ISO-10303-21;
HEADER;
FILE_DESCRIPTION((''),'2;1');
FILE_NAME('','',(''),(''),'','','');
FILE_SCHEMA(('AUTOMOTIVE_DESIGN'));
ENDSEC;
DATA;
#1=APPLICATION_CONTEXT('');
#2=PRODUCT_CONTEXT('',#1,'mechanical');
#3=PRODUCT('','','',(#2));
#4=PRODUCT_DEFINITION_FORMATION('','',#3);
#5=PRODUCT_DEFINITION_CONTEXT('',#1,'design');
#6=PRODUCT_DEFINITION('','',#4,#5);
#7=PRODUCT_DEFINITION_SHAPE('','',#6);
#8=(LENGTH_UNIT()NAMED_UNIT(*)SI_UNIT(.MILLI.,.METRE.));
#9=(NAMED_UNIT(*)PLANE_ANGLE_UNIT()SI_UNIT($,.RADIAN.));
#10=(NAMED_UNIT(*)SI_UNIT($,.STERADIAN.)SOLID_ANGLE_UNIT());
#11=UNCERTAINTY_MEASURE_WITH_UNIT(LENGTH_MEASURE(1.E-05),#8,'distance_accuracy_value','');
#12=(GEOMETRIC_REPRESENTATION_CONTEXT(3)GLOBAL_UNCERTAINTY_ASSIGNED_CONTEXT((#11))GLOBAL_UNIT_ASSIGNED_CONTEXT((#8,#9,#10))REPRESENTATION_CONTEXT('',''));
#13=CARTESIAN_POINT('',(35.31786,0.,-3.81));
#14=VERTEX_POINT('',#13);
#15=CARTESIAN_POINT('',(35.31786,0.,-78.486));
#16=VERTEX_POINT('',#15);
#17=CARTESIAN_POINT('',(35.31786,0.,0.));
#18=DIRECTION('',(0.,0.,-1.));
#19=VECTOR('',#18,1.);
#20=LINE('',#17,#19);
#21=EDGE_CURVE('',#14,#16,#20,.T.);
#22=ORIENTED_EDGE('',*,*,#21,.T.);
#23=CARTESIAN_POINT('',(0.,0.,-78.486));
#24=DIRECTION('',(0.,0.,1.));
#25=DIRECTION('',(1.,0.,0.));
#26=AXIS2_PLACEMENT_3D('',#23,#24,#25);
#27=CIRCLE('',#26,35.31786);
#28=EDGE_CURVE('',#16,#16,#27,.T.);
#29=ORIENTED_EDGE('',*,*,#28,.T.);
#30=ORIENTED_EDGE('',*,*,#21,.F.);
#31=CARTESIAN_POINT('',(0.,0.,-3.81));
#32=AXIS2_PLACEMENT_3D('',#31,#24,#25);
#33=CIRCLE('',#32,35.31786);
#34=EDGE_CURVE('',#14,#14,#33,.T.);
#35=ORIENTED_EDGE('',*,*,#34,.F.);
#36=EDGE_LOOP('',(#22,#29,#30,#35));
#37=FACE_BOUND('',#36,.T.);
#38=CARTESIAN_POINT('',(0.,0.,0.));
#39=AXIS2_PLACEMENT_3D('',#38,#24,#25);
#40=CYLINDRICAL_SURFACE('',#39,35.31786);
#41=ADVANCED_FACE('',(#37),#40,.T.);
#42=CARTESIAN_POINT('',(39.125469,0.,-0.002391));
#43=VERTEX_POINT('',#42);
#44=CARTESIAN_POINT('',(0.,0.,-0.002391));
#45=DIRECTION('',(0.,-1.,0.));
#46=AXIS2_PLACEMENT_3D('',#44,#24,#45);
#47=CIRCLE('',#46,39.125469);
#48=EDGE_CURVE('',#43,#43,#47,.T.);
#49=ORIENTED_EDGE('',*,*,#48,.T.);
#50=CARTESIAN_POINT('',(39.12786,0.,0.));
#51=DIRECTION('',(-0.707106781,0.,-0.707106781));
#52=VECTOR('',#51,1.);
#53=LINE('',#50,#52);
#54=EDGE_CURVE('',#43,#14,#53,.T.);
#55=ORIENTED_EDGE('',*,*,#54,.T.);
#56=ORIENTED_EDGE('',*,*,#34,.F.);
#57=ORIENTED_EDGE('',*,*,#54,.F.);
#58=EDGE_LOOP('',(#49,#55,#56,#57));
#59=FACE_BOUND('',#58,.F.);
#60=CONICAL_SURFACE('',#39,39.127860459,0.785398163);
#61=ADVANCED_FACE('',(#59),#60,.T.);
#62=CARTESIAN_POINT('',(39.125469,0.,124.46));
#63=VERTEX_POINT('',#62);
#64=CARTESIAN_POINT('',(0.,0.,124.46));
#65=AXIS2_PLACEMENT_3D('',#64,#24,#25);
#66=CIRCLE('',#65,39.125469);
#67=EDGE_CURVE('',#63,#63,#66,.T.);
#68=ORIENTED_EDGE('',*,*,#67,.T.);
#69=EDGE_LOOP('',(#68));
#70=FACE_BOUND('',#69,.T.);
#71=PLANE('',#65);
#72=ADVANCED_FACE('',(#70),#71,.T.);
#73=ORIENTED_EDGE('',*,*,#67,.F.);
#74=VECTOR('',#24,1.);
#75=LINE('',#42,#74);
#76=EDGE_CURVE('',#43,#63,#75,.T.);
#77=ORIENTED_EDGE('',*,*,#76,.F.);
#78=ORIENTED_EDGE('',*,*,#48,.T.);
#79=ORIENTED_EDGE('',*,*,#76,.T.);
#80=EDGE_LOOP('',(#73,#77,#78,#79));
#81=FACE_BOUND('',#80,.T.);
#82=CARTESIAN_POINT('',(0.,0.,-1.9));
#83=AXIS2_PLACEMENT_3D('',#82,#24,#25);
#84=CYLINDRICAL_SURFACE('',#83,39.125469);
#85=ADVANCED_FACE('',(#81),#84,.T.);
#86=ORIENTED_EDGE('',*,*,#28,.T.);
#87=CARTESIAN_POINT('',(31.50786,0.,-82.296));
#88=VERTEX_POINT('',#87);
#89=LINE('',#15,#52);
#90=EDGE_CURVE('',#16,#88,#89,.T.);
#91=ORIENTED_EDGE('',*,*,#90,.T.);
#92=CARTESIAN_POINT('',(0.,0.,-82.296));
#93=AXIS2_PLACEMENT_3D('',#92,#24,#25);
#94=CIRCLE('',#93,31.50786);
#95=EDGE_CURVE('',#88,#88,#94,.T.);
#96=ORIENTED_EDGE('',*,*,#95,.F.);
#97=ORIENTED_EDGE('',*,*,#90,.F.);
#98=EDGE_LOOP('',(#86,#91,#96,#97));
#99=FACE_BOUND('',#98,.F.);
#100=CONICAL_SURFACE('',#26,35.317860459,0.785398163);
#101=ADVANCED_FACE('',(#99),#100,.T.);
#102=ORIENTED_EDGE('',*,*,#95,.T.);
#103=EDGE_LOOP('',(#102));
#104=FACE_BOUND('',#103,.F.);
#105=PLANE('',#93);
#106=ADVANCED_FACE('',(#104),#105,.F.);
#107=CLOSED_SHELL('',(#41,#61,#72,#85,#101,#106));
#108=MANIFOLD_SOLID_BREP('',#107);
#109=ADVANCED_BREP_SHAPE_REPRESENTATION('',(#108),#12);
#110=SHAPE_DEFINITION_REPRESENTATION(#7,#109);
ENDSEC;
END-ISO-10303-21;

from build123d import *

# Parameters (mm, degrees)
F0_R        = 39.1254691666
F1_DEPTH    = 124.46
F2_R        = 35.3178604587
F3_DEPTH    = 82.296
F4_S5_R     = 39.1254691666
F4_T6_DEPTH = 57


# Not quite as in the source:
# - a fillet or chamfer that OpenCascade refuses, or shapes differently, is made with other operations: its cross-section is extruded or revolved along the edge and cut away or added
# - a feature of the source that left no trace in its solid (it failed there, or was rolled back) is left out


with BuildPart() as f1:
    # F0 (on Top) → F1 (new body)
    with BuildSketch(Plane.XY):
        Circle(F0_R)
    extrude(amount=F1_DEPTH)

    # F2 (on Top) → F3 (join)
    with BuildSketch(Plane.XY):
        Circle(F2_R)
    extrude(amount=-F3_DEPTH)

    # F4: chamfer of 3.81 on 3 edges, made by hand


with BuildPart() as f4_tool2:
    # F4_s3 → F4_t4 (revolve)
    with BuildSketch(Plane.XZ):
        Polygon((39.1278604587, 0), (35.3178604587, -3.81), (35.3178604587, 0), align=None)
    revolve(axis=Axis((0, 0, 0), (0, 0, 1)))

    # F4_s5 → F4_t6 (intersect, symmetric)
    with BuildSketch(Plane.XY.offset(-1.9)):
        Circle(F4_S5_R)
    extrude(amount=F4_T6_DEPTH, both=True, mode=Mode.INTERSECT)


with BuildPart() as f1_1:
    add(f1.part)

    # F4_t1: union F4_tool2
    add(f4_tool2.part)

    # F4_s7 → F4_t8 (revolve, cut)
    with BuildSketch(Plane.XZ):
        Polygon((35.3178604587, -78.486), (31.5078604587, -82.296), (35.3178604587, -82.296), align=None)
    revolve(axis=Axis((0, 0, -82.296), (0, 0, 1)), mode=Mode.SUBTRACT)


solid = f1_1.part
